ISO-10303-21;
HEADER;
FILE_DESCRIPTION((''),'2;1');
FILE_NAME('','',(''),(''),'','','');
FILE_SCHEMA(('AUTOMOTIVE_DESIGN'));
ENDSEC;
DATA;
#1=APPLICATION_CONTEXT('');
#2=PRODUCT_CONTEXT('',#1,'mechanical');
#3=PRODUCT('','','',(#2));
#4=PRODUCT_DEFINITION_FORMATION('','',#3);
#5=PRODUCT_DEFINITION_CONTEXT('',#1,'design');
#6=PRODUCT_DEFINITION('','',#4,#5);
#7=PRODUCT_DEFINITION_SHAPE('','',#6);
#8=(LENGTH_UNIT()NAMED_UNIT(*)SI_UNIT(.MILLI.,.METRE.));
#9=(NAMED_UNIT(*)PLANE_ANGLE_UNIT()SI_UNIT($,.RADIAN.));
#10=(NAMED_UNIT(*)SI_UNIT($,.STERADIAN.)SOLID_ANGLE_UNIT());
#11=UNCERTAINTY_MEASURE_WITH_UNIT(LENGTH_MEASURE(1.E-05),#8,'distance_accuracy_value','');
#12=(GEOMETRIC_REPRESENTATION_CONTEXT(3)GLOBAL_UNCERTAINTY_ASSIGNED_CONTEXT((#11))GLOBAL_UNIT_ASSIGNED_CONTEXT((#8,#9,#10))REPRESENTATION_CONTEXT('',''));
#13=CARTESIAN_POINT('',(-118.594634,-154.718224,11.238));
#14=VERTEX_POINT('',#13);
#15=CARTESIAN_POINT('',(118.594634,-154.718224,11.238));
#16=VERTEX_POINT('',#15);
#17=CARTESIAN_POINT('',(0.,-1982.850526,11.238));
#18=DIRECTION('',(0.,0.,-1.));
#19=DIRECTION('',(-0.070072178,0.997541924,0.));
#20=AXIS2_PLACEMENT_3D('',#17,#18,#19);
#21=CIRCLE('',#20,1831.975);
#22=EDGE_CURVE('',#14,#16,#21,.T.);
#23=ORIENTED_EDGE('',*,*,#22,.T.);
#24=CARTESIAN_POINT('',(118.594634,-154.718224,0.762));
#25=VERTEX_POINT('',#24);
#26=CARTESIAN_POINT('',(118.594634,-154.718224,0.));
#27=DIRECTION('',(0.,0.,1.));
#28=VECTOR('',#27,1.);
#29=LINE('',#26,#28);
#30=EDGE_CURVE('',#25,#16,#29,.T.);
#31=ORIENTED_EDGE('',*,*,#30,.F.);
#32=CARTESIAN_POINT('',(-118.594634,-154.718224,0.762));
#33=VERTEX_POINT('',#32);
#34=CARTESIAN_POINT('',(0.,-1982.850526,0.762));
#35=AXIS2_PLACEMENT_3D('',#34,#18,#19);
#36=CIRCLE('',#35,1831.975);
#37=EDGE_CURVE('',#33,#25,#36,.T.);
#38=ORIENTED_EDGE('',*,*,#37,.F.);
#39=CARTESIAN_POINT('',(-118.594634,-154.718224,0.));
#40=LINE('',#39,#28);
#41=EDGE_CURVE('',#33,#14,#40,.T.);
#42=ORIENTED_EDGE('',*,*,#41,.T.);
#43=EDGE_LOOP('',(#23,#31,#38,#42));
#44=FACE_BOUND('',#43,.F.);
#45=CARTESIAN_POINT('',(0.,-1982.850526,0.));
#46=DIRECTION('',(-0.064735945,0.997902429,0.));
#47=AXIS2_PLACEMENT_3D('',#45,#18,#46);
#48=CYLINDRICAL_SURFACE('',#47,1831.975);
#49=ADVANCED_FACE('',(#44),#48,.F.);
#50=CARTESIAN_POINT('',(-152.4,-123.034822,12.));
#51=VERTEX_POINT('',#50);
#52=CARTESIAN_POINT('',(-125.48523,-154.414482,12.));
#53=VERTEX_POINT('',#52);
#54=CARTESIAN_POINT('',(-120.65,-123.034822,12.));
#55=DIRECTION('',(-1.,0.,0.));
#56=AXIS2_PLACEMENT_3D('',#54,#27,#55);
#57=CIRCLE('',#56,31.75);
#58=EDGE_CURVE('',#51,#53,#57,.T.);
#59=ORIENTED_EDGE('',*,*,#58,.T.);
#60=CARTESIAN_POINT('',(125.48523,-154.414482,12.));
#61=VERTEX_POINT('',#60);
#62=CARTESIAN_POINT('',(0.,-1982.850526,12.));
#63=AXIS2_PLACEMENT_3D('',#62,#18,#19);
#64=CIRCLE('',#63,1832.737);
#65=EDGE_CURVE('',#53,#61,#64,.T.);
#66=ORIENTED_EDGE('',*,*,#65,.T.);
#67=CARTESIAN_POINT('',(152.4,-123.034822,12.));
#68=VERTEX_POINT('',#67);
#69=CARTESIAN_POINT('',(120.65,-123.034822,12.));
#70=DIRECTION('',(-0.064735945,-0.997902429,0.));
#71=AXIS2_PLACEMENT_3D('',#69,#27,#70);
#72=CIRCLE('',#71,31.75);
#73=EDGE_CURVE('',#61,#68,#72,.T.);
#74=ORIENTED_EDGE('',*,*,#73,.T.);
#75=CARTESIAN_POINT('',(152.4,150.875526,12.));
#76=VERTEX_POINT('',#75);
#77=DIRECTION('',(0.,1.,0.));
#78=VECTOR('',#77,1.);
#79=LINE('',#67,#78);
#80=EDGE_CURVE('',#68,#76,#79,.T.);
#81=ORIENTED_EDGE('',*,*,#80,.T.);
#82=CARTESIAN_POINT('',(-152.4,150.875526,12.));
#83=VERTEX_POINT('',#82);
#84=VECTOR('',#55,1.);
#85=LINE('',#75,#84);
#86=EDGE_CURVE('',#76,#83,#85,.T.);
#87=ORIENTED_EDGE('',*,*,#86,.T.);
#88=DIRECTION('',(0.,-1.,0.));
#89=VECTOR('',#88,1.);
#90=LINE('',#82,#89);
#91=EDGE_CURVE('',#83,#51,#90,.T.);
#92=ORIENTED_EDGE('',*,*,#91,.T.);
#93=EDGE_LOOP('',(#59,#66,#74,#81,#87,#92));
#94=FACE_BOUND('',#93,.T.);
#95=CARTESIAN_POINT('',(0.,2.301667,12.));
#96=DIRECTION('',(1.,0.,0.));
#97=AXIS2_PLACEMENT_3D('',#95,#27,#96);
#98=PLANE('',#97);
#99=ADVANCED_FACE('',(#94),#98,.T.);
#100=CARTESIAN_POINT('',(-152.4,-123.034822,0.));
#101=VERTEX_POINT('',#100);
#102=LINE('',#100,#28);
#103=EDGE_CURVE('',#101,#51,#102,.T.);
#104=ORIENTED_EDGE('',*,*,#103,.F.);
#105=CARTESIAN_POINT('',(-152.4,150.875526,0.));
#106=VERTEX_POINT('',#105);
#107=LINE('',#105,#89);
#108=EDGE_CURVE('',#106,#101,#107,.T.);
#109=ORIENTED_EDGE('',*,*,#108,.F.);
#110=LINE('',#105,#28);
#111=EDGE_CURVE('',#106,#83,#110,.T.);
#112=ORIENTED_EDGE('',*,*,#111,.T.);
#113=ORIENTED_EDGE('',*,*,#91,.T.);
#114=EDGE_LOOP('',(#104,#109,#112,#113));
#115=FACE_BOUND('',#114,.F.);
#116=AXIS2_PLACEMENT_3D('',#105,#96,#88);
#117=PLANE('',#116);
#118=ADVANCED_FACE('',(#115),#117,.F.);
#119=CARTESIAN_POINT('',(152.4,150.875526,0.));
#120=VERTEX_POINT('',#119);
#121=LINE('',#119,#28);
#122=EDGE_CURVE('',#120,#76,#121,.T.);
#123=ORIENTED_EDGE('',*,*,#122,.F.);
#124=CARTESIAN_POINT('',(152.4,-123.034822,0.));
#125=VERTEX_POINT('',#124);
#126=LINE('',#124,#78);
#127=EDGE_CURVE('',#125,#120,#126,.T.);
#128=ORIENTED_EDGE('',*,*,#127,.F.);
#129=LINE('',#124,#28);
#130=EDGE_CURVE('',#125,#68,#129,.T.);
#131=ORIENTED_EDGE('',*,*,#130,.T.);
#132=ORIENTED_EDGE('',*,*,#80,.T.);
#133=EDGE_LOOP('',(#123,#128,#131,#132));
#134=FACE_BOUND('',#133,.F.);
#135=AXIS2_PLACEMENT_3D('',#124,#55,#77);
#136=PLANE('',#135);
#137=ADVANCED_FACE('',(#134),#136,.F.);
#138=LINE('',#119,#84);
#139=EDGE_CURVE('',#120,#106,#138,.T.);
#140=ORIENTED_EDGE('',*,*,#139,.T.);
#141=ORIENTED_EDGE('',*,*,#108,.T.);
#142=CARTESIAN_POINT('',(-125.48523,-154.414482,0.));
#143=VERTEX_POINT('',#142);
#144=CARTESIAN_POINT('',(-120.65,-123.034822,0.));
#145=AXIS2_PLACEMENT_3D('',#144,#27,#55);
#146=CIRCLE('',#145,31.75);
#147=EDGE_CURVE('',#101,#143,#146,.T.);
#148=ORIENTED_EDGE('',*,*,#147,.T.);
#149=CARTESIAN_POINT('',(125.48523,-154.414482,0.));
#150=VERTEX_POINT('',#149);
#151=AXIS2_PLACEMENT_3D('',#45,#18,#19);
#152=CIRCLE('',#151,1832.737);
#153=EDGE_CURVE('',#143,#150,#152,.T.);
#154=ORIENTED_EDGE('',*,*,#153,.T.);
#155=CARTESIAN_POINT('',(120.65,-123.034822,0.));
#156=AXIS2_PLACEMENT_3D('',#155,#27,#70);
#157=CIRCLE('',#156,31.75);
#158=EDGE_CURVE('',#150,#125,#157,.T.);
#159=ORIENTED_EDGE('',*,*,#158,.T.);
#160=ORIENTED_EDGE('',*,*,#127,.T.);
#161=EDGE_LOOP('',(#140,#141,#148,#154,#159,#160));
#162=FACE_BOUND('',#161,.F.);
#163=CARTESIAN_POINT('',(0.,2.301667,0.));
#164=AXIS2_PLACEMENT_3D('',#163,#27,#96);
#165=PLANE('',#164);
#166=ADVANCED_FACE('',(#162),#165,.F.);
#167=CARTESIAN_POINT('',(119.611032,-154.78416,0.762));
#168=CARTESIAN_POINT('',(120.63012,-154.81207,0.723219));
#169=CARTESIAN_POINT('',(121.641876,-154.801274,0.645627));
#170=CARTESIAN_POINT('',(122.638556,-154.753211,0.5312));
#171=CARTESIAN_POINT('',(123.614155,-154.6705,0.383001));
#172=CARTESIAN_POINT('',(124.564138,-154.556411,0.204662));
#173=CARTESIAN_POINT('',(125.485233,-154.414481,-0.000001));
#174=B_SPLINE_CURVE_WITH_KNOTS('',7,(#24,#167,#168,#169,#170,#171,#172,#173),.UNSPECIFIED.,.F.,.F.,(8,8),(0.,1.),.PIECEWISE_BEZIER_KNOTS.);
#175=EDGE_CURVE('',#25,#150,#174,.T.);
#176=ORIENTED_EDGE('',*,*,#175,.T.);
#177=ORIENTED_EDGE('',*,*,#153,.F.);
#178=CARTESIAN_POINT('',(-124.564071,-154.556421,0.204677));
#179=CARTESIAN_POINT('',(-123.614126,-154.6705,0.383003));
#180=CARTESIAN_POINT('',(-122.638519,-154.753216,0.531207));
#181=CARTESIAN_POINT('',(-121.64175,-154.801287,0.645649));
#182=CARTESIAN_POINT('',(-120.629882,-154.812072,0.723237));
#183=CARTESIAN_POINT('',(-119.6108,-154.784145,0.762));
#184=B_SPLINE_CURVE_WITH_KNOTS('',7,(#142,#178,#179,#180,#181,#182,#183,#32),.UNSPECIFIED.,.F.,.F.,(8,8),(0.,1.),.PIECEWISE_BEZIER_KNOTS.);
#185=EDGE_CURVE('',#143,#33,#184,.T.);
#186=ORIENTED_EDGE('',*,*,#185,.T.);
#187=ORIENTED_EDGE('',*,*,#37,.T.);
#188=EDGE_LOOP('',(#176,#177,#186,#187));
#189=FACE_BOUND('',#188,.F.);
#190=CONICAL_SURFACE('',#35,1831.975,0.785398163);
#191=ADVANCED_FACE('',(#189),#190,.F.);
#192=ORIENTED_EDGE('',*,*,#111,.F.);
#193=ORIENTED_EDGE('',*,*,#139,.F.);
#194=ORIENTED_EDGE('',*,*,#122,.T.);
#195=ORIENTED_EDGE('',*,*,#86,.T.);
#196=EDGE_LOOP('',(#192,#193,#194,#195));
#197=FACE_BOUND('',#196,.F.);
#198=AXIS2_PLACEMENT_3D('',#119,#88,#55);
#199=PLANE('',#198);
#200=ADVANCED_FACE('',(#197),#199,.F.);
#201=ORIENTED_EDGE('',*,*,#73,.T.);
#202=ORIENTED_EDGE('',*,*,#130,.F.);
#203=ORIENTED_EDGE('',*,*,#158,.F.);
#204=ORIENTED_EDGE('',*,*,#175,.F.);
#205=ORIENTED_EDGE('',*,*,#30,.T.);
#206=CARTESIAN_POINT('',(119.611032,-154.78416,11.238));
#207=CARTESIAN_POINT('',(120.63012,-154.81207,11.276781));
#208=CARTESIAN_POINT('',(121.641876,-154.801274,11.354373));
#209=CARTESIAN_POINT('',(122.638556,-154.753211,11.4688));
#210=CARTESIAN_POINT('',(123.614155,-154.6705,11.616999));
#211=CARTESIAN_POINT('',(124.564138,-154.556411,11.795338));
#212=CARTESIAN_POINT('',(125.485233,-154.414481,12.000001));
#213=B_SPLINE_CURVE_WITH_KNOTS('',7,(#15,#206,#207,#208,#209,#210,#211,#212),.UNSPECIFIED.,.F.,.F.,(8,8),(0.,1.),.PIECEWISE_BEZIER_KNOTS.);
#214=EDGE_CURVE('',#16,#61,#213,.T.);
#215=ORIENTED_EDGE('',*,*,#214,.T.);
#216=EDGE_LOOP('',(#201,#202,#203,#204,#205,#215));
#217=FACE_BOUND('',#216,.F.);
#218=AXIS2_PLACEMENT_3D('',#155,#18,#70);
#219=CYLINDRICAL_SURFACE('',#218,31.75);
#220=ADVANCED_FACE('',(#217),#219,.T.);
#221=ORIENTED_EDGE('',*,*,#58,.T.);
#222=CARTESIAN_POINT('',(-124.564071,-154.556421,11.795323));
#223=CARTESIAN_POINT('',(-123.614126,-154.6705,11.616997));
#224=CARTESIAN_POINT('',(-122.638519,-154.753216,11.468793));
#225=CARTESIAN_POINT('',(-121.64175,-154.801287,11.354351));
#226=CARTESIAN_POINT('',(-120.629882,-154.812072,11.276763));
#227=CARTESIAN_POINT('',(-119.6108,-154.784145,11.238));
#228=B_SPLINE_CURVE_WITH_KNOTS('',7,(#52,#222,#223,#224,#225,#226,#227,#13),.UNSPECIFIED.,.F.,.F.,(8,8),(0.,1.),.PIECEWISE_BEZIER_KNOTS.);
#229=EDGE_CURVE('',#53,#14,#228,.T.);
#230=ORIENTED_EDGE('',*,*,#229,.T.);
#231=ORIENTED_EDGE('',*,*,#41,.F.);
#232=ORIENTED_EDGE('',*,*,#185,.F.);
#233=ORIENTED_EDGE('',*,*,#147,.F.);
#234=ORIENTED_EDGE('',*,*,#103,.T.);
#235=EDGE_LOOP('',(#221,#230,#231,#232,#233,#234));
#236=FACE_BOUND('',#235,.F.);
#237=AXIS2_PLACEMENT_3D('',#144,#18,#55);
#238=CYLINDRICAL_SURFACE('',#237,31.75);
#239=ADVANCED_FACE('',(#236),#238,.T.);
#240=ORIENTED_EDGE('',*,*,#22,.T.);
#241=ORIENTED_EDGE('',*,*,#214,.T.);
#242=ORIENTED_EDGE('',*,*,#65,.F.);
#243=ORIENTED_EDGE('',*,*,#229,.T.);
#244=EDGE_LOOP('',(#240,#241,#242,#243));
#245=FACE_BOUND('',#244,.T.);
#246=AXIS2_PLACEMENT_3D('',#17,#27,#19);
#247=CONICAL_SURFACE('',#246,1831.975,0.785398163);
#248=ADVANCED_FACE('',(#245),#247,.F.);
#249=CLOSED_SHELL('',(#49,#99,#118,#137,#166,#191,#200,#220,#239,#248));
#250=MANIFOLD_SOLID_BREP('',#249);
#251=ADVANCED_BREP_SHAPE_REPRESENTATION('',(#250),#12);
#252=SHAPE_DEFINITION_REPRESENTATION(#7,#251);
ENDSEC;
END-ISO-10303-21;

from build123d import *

# Parameters (mm, degrees)
F1_DEPTH    = 12
F2_T2_ANGLE = 8.0362657393
F2_T4_ANGLE = 8.0362657393


# Not quite as in the source:
# - a fillet or chamfer that OpenCascade refuses, or shapes differently, is made with other operations: its cross-section is extruded or revolved along the edge and cut away or added


with BuildPart() as f1:
    # F0 (on Top) → F1 (new body)
    with BuildSketch(Plane.XY):
        with BuildLine():
            Line((152.4, 150.8755259808), (-152.4, 150.8755259808))
            Line((-152.4, 150.8755259808), (-152.4, -123.0348219055))
            ThreePointArc((-152.4, -123.0348219055), (-142.3618011799, -146.2007492455), (-118.5946337308, -154.7182240192))
            ThreePointArc((-118.5946337308, -154.7182240192), (0, -150.8755259808), (118.5946337308, -154.7182240192))
            ThreePointArc((118.5946337308, -154.7182240192), (142.3618011799, -146.2007492455), (152.4, -123.0348219055))
            Line((152.4, -123.0348219055), (152.4, 150.8755259808))
        make_face()
    extrude(amount=F1_DEPTH)

    # F2: chamfer of 0.762 on 2 edges, made by hand

    # F2_s1 → F2_t2 (revolve, cut)
    with BuildSketch(Plane(origin=(-138.6011225893, -9.7360143416, 0), x_dir=(0, 0, 1), z_dir=(-0.9975419239, -0.0700721776, 0))):
        Polygon((11.238, -146.0015284816), (12, -145.2395284816), (12, -146.0015284816), align=None)
    revolve(axis=Axis((0, -1982.8505259812, 12), (0, 0, -1)), revolution_arc=F2_T2_ANGLE, mode=Mode.SUBTRACT)

    # F2_s3 → F2_t4 (revolve, cut)
    with BuildSketch(Plane(origin=(-138.6011225893, -9.7360143416, 0), x_dir=(0, 0, 1), z_dir=(-0.9975419239, -0.0700721776, 0))):
        Polygon((0.762, -146.0015284816), (0, -145.2395284816), (0, -146.0015284816), align=None)
    revolve(axis=Axis((0, -1982.8505259812, 0), (0, 0, -1)), revolution_arc=F2_T4_ANGLE, mode=Mode.SUBTRACT)


solid = f1.part
